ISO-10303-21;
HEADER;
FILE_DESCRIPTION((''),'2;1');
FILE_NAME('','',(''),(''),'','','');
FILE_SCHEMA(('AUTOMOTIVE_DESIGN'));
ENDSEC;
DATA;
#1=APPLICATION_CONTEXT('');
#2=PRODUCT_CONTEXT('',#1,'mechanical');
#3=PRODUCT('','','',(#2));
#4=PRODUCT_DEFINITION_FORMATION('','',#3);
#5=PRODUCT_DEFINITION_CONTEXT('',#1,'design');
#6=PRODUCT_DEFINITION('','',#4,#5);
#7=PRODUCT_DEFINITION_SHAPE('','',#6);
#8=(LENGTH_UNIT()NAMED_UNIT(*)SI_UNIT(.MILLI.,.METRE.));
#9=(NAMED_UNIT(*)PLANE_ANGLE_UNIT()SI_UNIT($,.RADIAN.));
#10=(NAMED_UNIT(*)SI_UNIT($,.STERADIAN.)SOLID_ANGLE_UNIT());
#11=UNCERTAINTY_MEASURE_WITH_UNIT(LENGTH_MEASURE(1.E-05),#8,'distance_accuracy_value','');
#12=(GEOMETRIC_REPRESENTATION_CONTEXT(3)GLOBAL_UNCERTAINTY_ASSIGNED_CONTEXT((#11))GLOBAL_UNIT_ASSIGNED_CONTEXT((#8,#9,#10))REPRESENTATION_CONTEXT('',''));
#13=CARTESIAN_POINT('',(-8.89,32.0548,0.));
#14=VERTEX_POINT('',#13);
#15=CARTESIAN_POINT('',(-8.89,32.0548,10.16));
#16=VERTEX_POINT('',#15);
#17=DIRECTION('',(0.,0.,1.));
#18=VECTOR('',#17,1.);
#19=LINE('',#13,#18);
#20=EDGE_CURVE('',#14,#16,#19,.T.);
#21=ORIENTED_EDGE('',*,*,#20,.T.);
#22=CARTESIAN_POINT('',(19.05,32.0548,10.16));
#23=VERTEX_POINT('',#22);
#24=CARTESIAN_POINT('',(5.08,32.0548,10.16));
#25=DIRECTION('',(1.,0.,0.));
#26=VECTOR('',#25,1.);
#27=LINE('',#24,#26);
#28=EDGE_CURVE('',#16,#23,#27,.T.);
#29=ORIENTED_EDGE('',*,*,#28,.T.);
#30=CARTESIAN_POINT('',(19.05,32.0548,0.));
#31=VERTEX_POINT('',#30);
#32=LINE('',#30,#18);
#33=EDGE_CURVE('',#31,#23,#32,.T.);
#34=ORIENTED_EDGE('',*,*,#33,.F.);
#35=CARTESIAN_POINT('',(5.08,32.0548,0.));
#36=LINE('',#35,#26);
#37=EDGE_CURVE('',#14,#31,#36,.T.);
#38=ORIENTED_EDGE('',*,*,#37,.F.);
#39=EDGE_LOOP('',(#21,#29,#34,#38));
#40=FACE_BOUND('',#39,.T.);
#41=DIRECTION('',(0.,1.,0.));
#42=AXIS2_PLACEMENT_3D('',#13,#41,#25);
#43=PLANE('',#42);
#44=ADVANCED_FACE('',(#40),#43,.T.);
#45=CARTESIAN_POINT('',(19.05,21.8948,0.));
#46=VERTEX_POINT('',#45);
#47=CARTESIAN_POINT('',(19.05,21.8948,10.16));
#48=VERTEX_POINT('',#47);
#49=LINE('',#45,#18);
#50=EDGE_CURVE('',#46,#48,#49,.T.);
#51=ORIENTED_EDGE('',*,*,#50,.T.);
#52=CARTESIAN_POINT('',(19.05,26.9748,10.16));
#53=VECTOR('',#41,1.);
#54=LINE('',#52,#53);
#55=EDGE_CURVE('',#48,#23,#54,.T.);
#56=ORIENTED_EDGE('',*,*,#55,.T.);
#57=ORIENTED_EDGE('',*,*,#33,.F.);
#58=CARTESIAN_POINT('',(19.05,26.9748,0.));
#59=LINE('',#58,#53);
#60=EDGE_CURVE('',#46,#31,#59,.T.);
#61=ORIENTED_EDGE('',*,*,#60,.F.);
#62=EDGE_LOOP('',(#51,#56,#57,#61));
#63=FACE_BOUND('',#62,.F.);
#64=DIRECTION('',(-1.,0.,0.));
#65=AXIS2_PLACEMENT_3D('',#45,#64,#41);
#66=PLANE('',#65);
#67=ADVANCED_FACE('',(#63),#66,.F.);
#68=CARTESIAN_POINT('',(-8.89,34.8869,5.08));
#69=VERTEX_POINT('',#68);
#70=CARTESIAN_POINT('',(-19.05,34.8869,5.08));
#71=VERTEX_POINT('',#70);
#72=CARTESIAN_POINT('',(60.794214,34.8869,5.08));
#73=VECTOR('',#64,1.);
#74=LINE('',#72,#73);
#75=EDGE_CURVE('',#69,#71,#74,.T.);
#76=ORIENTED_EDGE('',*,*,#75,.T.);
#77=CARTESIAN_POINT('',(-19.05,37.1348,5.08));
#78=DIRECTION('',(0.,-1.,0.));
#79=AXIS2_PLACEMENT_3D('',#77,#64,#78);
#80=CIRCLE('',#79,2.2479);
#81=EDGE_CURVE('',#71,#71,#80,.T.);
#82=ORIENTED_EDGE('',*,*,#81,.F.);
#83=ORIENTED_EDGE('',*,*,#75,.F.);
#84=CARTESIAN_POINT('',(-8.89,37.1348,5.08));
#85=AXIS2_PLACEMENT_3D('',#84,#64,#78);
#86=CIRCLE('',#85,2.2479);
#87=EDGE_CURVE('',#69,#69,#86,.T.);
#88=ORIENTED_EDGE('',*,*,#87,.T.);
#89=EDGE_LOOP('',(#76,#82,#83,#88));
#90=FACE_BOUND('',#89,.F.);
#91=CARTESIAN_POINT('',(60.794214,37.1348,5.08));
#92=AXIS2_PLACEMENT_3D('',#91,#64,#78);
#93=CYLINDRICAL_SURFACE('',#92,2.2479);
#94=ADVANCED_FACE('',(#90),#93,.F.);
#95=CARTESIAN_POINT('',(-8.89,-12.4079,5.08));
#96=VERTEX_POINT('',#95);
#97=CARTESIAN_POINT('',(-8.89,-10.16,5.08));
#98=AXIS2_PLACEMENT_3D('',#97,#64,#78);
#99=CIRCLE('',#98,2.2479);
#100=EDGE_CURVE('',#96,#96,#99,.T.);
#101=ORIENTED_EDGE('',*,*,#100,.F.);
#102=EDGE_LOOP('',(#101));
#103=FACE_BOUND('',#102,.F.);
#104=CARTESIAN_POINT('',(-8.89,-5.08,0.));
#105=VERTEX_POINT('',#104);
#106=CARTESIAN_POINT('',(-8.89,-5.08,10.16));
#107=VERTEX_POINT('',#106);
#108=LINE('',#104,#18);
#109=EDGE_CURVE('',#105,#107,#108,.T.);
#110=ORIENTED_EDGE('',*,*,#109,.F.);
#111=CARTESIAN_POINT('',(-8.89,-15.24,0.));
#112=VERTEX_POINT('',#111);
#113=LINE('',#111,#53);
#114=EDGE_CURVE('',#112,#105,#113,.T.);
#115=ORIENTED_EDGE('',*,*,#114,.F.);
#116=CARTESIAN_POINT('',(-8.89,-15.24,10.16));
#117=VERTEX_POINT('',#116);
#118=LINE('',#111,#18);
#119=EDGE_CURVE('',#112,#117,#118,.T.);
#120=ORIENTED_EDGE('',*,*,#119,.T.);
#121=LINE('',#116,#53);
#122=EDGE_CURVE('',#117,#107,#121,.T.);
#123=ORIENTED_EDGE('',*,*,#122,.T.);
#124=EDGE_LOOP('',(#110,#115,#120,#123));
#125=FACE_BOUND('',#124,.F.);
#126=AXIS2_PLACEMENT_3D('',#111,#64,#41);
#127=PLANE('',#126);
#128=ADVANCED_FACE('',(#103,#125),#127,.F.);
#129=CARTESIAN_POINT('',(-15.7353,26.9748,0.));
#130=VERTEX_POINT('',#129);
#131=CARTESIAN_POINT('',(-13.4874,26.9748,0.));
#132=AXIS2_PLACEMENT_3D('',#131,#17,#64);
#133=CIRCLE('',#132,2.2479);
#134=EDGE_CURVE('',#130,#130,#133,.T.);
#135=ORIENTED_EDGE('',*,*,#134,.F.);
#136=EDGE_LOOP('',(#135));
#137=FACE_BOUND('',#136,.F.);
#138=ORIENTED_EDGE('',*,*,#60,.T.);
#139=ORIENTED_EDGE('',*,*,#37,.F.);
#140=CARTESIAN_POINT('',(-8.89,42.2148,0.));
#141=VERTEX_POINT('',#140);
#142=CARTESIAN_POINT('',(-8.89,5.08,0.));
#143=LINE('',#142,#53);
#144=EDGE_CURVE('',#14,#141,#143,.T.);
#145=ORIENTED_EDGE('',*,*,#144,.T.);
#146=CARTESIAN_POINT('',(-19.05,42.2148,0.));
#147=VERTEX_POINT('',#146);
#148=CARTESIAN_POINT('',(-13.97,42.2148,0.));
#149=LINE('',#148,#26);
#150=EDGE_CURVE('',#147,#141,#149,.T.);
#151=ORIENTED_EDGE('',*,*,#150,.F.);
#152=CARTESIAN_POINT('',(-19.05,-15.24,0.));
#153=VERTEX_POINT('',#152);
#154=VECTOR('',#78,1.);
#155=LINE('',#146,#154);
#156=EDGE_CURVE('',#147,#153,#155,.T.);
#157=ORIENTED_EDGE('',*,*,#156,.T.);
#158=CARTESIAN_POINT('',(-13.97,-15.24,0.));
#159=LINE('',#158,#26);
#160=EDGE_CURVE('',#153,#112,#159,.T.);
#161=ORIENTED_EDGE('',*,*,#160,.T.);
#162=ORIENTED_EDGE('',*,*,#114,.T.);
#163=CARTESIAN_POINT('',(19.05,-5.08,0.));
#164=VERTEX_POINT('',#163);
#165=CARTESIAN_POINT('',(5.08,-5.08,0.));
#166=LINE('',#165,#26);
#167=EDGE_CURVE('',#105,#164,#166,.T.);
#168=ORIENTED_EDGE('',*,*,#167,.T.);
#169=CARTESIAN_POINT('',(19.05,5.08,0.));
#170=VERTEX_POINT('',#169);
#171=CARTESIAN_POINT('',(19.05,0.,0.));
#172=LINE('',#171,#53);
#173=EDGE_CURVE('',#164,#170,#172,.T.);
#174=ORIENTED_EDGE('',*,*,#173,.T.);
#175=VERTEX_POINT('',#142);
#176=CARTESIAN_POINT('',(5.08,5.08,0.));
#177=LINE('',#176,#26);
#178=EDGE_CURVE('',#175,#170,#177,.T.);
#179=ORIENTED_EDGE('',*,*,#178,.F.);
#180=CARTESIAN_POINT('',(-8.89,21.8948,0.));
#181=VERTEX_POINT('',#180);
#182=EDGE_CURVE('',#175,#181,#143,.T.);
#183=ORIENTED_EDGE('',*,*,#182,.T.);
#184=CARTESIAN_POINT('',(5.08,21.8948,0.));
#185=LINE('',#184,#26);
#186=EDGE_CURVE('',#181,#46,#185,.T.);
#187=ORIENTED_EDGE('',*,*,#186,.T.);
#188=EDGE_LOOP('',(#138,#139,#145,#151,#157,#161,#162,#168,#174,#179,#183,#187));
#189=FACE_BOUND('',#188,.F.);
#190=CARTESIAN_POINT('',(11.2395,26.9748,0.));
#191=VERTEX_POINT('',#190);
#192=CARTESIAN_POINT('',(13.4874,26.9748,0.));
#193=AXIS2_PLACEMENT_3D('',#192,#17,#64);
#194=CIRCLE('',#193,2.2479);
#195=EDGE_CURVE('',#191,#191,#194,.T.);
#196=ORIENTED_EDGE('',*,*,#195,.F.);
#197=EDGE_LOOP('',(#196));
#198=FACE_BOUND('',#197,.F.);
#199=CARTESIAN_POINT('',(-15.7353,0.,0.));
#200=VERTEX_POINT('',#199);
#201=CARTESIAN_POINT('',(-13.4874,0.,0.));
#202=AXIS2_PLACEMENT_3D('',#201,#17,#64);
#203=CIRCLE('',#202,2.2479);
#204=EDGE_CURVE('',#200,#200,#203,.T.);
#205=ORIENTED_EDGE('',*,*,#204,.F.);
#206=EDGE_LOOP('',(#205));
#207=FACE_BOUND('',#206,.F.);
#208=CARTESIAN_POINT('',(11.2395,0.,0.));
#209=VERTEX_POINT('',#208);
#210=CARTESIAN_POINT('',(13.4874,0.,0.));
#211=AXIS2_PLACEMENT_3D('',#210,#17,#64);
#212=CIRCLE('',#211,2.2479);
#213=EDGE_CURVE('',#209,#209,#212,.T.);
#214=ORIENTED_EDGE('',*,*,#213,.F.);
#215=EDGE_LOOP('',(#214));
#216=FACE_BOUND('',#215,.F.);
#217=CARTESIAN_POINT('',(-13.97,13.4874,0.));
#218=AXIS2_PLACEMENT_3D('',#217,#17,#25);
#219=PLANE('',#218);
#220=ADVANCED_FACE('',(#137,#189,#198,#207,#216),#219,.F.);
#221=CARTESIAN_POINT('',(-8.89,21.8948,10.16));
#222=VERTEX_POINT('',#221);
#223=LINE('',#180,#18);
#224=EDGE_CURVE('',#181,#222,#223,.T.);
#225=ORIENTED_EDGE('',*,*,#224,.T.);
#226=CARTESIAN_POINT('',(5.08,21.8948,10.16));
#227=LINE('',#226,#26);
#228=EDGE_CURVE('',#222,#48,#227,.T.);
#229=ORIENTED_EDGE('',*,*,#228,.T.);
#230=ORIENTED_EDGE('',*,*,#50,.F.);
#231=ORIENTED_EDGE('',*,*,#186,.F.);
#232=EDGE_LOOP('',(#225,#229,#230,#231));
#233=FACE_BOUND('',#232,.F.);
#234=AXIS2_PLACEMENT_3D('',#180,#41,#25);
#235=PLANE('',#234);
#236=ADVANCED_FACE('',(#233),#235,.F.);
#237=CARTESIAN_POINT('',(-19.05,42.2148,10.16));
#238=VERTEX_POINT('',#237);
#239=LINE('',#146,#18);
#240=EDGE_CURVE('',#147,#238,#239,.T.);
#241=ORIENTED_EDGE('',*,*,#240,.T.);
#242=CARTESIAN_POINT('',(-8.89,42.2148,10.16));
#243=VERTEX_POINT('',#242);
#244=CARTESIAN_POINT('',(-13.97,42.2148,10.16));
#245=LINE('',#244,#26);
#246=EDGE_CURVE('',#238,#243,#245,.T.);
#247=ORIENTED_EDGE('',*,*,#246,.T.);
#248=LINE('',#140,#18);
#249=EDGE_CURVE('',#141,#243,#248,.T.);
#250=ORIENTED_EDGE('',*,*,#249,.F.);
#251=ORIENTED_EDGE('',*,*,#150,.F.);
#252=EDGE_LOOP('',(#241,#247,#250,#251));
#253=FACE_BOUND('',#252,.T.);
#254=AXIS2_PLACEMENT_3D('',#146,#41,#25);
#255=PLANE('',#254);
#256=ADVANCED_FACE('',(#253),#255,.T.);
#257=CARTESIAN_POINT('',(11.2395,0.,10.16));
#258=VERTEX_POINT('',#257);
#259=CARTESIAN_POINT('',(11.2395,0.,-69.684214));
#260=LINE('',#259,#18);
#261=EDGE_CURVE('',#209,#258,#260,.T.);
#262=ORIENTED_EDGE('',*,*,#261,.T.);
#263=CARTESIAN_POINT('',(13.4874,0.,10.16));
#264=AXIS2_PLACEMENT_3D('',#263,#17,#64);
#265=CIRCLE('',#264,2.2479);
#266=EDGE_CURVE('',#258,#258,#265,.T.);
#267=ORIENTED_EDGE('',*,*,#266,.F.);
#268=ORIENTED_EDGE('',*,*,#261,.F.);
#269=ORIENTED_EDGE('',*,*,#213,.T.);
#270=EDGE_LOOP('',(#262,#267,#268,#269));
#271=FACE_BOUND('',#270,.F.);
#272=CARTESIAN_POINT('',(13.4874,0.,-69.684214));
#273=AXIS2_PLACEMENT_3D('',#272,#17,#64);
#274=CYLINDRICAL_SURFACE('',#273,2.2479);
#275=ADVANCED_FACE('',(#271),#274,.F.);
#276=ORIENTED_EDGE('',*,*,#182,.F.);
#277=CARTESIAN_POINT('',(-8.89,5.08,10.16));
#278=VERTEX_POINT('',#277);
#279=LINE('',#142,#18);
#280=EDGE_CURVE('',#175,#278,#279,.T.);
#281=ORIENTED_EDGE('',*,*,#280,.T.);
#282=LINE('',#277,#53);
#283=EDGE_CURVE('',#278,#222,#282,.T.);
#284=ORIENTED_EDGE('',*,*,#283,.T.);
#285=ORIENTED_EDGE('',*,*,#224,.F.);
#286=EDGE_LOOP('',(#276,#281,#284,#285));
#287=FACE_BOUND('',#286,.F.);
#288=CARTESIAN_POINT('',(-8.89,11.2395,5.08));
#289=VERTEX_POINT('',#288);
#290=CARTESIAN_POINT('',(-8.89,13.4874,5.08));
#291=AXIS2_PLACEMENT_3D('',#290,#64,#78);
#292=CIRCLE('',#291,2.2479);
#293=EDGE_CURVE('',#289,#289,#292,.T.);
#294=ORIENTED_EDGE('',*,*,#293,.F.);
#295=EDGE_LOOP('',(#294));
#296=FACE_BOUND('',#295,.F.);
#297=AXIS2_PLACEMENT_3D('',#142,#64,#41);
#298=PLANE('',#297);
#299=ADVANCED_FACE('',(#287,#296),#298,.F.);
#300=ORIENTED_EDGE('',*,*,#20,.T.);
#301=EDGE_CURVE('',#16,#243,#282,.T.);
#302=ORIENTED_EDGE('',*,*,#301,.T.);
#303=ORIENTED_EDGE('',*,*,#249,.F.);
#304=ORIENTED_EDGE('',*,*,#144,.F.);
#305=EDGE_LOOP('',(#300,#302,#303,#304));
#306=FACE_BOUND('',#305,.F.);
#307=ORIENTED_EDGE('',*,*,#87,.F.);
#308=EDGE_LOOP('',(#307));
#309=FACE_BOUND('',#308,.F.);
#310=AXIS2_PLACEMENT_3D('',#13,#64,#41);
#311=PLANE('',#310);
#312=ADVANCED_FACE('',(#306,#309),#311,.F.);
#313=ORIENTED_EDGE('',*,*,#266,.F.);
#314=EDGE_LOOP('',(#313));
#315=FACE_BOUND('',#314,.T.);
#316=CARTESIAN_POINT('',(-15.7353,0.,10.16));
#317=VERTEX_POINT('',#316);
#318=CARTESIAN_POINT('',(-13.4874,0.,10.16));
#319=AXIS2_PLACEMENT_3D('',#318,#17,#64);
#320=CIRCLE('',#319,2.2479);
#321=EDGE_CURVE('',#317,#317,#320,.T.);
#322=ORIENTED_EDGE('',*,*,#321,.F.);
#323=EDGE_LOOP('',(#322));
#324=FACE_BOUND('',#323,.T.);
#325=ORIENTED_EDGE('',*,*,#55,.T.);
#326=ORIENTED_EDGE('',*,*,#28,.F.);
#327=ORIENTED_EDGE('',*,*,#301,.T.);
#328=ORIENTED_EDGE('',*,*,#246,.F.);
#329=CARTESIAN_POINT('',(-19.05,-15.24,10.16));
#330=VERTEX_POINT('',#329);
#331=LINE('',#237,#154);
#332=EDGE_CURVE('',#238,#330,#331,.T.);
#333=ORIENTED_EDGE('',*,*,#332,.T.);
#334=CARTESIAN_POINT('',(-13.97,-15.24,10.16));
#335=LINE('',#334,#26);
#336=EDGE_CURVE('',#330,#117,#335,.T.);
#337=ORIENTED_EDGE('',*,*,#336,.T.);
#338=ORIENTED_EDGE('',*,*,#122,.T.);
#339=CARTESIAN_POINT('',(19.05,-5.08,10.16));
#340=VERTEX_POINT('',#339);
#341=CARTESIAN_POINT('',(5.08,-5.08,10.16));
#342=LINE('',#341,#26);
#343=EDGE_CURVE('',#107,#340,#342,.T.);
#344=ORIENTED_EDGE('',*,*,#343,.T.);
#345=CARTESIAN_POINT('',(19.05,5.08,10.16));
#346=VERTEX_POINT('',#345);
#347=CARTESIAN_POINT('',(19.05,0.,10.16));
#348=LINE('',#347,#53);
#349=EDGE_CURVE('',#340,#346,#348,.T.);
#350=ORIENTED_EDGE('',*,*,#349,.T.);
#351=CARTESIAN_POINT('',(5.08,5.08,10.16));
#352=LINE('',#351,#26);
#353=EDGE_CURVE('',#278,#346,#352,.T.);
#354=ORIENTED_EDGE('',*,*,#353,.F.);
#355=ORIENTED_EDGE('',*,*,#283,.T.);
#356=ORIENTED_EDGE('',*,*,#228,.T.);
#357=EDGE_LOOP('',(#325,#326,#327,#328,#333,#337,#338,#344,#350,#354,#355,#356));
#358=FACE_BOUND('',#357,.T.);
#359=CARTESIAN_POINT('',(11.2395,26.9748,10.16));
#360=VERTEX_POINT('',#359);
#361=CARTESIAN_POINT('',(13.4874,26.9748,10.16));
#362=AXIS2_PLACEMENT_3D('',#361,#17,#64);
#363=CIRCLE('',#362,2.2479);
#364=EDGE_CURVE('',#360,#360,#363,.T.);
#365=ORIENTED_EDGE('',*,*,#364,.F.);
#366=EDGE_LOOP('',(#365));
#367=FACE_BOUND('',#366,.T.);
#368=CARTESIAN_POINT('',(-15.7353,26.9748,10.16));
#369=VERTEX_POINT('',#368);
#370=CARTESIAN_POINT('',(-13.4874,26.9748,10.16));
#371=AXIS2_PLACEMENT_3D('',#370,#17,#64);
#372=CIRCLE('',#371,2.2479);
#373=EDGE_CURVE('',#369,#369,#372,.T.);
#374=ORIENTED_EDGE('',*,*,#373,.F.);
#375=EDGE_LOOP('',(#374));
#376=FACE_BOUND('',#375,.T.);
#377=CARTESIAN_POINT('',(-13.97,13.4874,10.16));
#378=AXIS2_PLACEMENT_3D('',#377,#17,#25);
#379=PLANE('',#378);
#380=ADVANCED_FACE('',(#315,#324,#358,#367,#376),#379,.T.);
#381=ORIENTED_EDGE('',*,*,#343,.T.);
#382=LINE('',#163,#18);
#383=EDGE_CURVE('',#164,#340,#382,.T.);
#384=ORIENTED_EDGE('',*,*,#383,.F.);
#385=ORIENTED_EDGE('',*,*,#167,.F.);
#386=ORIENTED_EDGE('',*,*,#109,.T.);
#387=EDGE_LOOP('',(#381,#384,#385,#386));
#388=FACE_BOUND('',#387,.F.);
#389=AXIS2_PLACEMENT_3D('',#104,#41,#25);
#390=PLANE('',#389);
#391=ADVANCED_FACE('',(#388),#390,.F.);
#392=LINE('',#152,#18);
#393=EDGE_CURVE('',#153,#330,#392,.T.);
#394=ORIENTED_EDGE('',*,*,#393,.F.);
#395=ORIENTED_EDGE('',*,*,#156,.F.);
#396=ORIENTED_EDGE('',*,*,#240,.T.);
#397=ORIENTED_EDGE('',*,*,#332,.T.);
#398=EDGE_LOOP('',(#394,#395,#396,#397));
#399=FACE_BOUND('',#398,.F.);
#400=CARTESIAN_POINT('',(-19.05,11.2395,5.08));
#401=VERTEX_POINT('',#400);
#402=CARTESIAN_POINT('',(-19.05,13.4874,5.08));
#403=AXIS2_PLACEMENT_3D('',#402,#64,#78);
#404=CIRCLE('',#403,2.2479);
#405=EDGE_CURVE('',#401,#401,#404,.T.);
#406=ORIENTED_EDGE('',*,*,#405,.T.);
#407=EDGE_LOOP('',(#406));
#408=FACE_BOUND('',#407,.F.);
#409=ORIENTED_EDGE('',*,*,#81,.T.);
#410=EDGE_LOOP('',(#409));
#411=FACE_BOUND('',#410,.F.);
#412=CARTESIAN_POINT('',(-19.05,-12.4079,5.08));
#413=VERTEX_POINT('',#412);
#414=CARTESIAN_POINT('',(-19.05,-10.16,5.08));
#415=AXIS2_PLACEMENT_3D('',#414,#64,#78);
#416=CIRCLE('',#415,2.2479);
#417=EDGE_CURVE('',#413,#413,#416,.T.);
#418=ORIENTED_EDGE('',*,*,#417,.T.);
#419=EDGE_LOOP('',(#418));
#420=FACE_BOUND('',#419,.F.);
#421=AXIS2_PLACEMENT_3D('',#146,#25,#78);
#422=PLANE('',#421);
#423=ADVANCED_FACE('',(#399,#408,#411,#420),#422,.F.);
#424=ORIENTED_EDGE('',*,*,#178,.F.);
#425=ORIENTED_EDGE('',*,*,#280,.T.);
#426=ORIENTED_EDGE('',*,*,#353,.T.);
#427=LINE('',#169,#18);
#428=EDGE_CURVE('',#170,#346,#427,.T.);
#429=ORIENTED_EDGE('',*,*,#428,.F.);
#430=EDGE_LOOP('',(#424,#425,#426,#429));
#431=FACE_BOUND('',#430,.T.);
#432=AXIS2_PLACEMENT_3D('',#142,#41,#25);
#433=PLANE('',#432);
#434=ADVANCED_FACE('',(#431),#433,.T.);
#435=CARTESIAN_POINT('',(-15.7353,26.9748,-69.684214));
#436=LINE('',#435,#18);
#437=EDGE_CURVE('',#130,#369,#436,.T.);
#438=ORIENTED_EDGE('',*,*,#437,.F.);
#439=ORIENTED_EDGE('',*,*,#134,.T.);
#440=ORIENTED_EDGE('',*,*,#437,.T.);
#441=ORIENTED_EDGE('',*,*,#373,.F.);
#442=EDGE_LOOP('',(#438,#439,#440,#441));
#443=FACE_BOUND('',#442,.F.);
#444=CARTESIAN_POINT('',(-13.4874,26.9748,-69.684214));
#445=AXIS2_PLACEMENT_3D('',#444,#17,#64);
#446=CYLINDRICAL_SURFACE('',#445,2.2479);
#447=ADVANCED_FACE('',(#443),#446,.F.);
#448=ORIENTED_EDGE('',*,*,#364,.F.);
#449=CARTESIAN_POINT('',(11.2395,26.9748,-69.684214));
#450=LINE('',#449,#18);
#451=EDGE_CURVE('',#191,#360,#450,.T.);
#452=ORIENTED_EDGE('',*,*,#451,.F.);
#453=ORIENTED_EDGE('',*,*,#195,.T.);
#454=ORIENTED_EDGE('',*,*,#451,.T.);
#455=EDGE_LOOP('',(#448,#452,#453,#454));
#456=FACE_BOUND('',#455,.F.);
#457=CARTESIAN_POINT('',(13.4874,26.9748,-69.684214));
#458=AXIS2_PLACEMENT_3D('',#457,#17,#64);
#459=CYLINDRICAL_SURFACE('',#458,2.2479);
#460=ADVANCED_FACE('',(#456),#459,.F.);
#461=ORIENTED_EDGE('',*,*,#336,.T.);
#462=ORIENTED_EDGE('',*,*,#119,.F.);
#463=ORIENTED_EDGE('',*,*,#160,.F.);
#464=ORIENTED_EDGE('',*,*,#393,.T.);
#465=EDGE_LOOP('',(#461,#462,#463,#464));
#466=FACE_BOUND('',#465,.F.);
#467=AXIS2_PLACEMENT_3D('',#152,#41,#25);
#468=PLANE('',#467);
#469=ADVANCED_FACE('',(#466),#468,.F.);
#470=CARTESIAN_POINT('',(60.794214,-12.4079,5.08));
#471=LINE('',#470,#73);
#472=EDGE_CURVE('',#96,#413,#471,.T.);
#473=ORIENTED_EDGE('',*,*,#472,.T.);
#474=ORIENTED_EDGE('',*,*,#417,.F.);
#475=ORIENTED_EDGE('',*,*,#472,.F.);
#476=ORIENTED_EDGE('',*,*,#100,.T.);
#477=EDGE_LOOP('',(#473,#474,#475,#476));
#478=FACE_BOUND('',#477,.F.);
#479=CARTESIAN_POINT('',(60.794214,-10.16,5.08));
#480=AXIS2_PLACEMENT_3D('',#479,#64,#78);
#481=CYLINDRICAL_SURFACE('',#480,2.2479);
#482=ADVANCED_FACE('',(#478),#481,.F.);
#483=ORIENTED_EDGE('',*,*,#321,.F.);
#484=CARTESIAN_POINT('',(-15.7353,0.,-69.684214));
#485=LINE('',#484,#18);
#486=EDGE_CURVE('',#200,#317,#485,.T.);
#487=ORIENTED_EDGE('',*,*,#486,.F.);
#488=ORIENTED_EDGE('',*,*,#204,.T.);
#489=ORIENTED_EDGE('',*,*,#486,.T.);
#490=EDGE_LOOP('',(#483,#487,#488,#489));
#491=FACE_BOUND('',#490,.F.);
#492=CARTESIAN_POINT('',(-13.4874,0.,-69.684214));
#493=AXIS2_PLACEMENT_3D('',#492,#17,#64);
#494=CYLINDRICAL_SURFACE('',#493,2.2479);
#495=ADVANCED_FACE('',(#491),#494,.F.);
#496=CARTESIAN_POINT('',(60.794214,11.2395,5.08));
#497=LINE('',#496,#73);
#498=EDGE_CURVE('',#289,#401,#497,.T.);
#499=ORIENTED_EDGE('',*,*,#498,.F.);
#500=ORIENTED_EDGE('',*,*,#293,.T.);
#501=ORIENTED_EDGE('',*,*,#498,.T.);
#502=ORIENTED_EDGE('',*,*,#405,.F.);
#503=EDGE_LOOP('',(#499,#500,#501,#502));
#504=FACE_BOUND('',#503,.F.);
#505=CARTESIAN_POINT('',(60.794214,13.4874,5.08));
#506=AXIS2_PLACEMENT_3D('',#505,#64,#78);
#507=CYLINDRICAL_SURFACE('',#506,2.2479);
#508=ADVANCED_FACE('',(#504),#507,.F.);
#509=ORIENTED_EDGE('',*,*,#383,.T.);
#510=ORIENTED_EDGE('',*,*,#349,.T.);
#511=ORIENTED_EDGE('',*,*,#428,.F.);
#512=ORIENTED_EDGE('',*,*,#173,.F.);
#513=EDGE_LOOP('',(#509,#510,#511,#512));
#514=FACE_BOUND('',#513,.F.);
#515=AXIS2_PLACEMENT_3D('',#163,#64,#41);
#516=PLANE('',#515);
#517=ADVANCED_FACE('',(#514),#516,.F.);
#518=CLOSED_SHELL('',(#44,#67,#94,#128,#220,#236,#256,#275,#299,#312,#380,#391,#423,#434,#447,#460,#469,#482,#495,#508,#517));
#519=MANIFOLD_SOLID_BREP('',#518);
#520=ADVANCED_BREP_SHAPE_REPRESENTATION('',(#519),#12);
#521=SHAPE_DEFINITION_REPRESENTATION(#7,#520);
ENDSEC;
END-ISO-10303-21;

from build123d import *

# Parameters (mm, degrees)
F0_W     = 10.16
F0_H     = 10.16
F0_W_2   = 27.94
F1_DEPTH = 10.16
F2_D     = 4.4958
F3_D     = 4.4958
F4_D     = 4.4958
F5_D     = 4.4958
F7_D     = 4.4958
F10_D    = 4.4958
F11_D    = 4.4958


# Not quite as in the source:
# - a feature names something its author has since deleted; it is built from what else it names


with BuildPart() as f1:
    # F0 (on Top) → F1 (new body)
    with BuildSketch(Plane.XY):
        Polygon((-19.05, 32.0548), (-19.05, -5.08), (-8.89, -5.08), (-8.89, 5.08), (-8.89, 21.8948), (-8.89, 32.0548), align=None)
        with Locations((-13.97, -10.16)):
            Rectangle(F0_W, F0_H)
        with Locations((5.08, 0)):
            Rectangle(F0_W_2, F0_H)
        with Locations((-13.97, 37.1348)):
            Rectangle(F0_W, F0_H)
        with Locations((5.08, 26.9748)):
            Rectangle(F0_W_2, F0_H)
    extrude(amount=F1_DEPTH)

    # F2 (through all)
    with Locations(Plane(origin=(0, 0, 0), x_dir=(1, 0, 0), z_dir=(0, 0, -1))):
        with Locations((13.4874, 0)):
            Hole(F2_D / 2)

    # F3 (through all)
    with Locations(Plane(origin=(0, 0, 0), x_dir=(1, 0, 0), z_dir=(0, 0, -1))):
        with Locations((-13.4874, 0)):
            Hole(F3_D / 2)

    # F4 (through all)
    with Locations(Plane(origin=(0, 0, 0), x_dir=(1, 0, 0), z_dir=(0, 0, -1))):
        with Locations((-13.4874, -26.9748)):
            Hole(F4_D / 2)

    # F5 (through all)
    with Locations(Plane(origin=(0, 0, 0), x_dir=(1, 0, 0), z_dir=(0, 0, -1))):
        with Locations((13.4874, -26.9748)):
            Hole(F5_D / 2)

    # F7 (through all)
    with Locations(Plane.YZ.offset(-8.89)):
        with Locations((13.4874, 5.08)):
            Hole(F7_D / 2)

    # F10 (through all)
    with Locations(Plane.YZ.offset(-8.89)):
        with Locations((-10.16, 5.08)):
            Hole(F10_D / 2)

    # F11 (through all)
    with Locations(Plane.YZ.offset(-8.89)):
        with Locations((37.1348, 5.08)):
            Hole(F11_D / 2)


solid = f1.part
